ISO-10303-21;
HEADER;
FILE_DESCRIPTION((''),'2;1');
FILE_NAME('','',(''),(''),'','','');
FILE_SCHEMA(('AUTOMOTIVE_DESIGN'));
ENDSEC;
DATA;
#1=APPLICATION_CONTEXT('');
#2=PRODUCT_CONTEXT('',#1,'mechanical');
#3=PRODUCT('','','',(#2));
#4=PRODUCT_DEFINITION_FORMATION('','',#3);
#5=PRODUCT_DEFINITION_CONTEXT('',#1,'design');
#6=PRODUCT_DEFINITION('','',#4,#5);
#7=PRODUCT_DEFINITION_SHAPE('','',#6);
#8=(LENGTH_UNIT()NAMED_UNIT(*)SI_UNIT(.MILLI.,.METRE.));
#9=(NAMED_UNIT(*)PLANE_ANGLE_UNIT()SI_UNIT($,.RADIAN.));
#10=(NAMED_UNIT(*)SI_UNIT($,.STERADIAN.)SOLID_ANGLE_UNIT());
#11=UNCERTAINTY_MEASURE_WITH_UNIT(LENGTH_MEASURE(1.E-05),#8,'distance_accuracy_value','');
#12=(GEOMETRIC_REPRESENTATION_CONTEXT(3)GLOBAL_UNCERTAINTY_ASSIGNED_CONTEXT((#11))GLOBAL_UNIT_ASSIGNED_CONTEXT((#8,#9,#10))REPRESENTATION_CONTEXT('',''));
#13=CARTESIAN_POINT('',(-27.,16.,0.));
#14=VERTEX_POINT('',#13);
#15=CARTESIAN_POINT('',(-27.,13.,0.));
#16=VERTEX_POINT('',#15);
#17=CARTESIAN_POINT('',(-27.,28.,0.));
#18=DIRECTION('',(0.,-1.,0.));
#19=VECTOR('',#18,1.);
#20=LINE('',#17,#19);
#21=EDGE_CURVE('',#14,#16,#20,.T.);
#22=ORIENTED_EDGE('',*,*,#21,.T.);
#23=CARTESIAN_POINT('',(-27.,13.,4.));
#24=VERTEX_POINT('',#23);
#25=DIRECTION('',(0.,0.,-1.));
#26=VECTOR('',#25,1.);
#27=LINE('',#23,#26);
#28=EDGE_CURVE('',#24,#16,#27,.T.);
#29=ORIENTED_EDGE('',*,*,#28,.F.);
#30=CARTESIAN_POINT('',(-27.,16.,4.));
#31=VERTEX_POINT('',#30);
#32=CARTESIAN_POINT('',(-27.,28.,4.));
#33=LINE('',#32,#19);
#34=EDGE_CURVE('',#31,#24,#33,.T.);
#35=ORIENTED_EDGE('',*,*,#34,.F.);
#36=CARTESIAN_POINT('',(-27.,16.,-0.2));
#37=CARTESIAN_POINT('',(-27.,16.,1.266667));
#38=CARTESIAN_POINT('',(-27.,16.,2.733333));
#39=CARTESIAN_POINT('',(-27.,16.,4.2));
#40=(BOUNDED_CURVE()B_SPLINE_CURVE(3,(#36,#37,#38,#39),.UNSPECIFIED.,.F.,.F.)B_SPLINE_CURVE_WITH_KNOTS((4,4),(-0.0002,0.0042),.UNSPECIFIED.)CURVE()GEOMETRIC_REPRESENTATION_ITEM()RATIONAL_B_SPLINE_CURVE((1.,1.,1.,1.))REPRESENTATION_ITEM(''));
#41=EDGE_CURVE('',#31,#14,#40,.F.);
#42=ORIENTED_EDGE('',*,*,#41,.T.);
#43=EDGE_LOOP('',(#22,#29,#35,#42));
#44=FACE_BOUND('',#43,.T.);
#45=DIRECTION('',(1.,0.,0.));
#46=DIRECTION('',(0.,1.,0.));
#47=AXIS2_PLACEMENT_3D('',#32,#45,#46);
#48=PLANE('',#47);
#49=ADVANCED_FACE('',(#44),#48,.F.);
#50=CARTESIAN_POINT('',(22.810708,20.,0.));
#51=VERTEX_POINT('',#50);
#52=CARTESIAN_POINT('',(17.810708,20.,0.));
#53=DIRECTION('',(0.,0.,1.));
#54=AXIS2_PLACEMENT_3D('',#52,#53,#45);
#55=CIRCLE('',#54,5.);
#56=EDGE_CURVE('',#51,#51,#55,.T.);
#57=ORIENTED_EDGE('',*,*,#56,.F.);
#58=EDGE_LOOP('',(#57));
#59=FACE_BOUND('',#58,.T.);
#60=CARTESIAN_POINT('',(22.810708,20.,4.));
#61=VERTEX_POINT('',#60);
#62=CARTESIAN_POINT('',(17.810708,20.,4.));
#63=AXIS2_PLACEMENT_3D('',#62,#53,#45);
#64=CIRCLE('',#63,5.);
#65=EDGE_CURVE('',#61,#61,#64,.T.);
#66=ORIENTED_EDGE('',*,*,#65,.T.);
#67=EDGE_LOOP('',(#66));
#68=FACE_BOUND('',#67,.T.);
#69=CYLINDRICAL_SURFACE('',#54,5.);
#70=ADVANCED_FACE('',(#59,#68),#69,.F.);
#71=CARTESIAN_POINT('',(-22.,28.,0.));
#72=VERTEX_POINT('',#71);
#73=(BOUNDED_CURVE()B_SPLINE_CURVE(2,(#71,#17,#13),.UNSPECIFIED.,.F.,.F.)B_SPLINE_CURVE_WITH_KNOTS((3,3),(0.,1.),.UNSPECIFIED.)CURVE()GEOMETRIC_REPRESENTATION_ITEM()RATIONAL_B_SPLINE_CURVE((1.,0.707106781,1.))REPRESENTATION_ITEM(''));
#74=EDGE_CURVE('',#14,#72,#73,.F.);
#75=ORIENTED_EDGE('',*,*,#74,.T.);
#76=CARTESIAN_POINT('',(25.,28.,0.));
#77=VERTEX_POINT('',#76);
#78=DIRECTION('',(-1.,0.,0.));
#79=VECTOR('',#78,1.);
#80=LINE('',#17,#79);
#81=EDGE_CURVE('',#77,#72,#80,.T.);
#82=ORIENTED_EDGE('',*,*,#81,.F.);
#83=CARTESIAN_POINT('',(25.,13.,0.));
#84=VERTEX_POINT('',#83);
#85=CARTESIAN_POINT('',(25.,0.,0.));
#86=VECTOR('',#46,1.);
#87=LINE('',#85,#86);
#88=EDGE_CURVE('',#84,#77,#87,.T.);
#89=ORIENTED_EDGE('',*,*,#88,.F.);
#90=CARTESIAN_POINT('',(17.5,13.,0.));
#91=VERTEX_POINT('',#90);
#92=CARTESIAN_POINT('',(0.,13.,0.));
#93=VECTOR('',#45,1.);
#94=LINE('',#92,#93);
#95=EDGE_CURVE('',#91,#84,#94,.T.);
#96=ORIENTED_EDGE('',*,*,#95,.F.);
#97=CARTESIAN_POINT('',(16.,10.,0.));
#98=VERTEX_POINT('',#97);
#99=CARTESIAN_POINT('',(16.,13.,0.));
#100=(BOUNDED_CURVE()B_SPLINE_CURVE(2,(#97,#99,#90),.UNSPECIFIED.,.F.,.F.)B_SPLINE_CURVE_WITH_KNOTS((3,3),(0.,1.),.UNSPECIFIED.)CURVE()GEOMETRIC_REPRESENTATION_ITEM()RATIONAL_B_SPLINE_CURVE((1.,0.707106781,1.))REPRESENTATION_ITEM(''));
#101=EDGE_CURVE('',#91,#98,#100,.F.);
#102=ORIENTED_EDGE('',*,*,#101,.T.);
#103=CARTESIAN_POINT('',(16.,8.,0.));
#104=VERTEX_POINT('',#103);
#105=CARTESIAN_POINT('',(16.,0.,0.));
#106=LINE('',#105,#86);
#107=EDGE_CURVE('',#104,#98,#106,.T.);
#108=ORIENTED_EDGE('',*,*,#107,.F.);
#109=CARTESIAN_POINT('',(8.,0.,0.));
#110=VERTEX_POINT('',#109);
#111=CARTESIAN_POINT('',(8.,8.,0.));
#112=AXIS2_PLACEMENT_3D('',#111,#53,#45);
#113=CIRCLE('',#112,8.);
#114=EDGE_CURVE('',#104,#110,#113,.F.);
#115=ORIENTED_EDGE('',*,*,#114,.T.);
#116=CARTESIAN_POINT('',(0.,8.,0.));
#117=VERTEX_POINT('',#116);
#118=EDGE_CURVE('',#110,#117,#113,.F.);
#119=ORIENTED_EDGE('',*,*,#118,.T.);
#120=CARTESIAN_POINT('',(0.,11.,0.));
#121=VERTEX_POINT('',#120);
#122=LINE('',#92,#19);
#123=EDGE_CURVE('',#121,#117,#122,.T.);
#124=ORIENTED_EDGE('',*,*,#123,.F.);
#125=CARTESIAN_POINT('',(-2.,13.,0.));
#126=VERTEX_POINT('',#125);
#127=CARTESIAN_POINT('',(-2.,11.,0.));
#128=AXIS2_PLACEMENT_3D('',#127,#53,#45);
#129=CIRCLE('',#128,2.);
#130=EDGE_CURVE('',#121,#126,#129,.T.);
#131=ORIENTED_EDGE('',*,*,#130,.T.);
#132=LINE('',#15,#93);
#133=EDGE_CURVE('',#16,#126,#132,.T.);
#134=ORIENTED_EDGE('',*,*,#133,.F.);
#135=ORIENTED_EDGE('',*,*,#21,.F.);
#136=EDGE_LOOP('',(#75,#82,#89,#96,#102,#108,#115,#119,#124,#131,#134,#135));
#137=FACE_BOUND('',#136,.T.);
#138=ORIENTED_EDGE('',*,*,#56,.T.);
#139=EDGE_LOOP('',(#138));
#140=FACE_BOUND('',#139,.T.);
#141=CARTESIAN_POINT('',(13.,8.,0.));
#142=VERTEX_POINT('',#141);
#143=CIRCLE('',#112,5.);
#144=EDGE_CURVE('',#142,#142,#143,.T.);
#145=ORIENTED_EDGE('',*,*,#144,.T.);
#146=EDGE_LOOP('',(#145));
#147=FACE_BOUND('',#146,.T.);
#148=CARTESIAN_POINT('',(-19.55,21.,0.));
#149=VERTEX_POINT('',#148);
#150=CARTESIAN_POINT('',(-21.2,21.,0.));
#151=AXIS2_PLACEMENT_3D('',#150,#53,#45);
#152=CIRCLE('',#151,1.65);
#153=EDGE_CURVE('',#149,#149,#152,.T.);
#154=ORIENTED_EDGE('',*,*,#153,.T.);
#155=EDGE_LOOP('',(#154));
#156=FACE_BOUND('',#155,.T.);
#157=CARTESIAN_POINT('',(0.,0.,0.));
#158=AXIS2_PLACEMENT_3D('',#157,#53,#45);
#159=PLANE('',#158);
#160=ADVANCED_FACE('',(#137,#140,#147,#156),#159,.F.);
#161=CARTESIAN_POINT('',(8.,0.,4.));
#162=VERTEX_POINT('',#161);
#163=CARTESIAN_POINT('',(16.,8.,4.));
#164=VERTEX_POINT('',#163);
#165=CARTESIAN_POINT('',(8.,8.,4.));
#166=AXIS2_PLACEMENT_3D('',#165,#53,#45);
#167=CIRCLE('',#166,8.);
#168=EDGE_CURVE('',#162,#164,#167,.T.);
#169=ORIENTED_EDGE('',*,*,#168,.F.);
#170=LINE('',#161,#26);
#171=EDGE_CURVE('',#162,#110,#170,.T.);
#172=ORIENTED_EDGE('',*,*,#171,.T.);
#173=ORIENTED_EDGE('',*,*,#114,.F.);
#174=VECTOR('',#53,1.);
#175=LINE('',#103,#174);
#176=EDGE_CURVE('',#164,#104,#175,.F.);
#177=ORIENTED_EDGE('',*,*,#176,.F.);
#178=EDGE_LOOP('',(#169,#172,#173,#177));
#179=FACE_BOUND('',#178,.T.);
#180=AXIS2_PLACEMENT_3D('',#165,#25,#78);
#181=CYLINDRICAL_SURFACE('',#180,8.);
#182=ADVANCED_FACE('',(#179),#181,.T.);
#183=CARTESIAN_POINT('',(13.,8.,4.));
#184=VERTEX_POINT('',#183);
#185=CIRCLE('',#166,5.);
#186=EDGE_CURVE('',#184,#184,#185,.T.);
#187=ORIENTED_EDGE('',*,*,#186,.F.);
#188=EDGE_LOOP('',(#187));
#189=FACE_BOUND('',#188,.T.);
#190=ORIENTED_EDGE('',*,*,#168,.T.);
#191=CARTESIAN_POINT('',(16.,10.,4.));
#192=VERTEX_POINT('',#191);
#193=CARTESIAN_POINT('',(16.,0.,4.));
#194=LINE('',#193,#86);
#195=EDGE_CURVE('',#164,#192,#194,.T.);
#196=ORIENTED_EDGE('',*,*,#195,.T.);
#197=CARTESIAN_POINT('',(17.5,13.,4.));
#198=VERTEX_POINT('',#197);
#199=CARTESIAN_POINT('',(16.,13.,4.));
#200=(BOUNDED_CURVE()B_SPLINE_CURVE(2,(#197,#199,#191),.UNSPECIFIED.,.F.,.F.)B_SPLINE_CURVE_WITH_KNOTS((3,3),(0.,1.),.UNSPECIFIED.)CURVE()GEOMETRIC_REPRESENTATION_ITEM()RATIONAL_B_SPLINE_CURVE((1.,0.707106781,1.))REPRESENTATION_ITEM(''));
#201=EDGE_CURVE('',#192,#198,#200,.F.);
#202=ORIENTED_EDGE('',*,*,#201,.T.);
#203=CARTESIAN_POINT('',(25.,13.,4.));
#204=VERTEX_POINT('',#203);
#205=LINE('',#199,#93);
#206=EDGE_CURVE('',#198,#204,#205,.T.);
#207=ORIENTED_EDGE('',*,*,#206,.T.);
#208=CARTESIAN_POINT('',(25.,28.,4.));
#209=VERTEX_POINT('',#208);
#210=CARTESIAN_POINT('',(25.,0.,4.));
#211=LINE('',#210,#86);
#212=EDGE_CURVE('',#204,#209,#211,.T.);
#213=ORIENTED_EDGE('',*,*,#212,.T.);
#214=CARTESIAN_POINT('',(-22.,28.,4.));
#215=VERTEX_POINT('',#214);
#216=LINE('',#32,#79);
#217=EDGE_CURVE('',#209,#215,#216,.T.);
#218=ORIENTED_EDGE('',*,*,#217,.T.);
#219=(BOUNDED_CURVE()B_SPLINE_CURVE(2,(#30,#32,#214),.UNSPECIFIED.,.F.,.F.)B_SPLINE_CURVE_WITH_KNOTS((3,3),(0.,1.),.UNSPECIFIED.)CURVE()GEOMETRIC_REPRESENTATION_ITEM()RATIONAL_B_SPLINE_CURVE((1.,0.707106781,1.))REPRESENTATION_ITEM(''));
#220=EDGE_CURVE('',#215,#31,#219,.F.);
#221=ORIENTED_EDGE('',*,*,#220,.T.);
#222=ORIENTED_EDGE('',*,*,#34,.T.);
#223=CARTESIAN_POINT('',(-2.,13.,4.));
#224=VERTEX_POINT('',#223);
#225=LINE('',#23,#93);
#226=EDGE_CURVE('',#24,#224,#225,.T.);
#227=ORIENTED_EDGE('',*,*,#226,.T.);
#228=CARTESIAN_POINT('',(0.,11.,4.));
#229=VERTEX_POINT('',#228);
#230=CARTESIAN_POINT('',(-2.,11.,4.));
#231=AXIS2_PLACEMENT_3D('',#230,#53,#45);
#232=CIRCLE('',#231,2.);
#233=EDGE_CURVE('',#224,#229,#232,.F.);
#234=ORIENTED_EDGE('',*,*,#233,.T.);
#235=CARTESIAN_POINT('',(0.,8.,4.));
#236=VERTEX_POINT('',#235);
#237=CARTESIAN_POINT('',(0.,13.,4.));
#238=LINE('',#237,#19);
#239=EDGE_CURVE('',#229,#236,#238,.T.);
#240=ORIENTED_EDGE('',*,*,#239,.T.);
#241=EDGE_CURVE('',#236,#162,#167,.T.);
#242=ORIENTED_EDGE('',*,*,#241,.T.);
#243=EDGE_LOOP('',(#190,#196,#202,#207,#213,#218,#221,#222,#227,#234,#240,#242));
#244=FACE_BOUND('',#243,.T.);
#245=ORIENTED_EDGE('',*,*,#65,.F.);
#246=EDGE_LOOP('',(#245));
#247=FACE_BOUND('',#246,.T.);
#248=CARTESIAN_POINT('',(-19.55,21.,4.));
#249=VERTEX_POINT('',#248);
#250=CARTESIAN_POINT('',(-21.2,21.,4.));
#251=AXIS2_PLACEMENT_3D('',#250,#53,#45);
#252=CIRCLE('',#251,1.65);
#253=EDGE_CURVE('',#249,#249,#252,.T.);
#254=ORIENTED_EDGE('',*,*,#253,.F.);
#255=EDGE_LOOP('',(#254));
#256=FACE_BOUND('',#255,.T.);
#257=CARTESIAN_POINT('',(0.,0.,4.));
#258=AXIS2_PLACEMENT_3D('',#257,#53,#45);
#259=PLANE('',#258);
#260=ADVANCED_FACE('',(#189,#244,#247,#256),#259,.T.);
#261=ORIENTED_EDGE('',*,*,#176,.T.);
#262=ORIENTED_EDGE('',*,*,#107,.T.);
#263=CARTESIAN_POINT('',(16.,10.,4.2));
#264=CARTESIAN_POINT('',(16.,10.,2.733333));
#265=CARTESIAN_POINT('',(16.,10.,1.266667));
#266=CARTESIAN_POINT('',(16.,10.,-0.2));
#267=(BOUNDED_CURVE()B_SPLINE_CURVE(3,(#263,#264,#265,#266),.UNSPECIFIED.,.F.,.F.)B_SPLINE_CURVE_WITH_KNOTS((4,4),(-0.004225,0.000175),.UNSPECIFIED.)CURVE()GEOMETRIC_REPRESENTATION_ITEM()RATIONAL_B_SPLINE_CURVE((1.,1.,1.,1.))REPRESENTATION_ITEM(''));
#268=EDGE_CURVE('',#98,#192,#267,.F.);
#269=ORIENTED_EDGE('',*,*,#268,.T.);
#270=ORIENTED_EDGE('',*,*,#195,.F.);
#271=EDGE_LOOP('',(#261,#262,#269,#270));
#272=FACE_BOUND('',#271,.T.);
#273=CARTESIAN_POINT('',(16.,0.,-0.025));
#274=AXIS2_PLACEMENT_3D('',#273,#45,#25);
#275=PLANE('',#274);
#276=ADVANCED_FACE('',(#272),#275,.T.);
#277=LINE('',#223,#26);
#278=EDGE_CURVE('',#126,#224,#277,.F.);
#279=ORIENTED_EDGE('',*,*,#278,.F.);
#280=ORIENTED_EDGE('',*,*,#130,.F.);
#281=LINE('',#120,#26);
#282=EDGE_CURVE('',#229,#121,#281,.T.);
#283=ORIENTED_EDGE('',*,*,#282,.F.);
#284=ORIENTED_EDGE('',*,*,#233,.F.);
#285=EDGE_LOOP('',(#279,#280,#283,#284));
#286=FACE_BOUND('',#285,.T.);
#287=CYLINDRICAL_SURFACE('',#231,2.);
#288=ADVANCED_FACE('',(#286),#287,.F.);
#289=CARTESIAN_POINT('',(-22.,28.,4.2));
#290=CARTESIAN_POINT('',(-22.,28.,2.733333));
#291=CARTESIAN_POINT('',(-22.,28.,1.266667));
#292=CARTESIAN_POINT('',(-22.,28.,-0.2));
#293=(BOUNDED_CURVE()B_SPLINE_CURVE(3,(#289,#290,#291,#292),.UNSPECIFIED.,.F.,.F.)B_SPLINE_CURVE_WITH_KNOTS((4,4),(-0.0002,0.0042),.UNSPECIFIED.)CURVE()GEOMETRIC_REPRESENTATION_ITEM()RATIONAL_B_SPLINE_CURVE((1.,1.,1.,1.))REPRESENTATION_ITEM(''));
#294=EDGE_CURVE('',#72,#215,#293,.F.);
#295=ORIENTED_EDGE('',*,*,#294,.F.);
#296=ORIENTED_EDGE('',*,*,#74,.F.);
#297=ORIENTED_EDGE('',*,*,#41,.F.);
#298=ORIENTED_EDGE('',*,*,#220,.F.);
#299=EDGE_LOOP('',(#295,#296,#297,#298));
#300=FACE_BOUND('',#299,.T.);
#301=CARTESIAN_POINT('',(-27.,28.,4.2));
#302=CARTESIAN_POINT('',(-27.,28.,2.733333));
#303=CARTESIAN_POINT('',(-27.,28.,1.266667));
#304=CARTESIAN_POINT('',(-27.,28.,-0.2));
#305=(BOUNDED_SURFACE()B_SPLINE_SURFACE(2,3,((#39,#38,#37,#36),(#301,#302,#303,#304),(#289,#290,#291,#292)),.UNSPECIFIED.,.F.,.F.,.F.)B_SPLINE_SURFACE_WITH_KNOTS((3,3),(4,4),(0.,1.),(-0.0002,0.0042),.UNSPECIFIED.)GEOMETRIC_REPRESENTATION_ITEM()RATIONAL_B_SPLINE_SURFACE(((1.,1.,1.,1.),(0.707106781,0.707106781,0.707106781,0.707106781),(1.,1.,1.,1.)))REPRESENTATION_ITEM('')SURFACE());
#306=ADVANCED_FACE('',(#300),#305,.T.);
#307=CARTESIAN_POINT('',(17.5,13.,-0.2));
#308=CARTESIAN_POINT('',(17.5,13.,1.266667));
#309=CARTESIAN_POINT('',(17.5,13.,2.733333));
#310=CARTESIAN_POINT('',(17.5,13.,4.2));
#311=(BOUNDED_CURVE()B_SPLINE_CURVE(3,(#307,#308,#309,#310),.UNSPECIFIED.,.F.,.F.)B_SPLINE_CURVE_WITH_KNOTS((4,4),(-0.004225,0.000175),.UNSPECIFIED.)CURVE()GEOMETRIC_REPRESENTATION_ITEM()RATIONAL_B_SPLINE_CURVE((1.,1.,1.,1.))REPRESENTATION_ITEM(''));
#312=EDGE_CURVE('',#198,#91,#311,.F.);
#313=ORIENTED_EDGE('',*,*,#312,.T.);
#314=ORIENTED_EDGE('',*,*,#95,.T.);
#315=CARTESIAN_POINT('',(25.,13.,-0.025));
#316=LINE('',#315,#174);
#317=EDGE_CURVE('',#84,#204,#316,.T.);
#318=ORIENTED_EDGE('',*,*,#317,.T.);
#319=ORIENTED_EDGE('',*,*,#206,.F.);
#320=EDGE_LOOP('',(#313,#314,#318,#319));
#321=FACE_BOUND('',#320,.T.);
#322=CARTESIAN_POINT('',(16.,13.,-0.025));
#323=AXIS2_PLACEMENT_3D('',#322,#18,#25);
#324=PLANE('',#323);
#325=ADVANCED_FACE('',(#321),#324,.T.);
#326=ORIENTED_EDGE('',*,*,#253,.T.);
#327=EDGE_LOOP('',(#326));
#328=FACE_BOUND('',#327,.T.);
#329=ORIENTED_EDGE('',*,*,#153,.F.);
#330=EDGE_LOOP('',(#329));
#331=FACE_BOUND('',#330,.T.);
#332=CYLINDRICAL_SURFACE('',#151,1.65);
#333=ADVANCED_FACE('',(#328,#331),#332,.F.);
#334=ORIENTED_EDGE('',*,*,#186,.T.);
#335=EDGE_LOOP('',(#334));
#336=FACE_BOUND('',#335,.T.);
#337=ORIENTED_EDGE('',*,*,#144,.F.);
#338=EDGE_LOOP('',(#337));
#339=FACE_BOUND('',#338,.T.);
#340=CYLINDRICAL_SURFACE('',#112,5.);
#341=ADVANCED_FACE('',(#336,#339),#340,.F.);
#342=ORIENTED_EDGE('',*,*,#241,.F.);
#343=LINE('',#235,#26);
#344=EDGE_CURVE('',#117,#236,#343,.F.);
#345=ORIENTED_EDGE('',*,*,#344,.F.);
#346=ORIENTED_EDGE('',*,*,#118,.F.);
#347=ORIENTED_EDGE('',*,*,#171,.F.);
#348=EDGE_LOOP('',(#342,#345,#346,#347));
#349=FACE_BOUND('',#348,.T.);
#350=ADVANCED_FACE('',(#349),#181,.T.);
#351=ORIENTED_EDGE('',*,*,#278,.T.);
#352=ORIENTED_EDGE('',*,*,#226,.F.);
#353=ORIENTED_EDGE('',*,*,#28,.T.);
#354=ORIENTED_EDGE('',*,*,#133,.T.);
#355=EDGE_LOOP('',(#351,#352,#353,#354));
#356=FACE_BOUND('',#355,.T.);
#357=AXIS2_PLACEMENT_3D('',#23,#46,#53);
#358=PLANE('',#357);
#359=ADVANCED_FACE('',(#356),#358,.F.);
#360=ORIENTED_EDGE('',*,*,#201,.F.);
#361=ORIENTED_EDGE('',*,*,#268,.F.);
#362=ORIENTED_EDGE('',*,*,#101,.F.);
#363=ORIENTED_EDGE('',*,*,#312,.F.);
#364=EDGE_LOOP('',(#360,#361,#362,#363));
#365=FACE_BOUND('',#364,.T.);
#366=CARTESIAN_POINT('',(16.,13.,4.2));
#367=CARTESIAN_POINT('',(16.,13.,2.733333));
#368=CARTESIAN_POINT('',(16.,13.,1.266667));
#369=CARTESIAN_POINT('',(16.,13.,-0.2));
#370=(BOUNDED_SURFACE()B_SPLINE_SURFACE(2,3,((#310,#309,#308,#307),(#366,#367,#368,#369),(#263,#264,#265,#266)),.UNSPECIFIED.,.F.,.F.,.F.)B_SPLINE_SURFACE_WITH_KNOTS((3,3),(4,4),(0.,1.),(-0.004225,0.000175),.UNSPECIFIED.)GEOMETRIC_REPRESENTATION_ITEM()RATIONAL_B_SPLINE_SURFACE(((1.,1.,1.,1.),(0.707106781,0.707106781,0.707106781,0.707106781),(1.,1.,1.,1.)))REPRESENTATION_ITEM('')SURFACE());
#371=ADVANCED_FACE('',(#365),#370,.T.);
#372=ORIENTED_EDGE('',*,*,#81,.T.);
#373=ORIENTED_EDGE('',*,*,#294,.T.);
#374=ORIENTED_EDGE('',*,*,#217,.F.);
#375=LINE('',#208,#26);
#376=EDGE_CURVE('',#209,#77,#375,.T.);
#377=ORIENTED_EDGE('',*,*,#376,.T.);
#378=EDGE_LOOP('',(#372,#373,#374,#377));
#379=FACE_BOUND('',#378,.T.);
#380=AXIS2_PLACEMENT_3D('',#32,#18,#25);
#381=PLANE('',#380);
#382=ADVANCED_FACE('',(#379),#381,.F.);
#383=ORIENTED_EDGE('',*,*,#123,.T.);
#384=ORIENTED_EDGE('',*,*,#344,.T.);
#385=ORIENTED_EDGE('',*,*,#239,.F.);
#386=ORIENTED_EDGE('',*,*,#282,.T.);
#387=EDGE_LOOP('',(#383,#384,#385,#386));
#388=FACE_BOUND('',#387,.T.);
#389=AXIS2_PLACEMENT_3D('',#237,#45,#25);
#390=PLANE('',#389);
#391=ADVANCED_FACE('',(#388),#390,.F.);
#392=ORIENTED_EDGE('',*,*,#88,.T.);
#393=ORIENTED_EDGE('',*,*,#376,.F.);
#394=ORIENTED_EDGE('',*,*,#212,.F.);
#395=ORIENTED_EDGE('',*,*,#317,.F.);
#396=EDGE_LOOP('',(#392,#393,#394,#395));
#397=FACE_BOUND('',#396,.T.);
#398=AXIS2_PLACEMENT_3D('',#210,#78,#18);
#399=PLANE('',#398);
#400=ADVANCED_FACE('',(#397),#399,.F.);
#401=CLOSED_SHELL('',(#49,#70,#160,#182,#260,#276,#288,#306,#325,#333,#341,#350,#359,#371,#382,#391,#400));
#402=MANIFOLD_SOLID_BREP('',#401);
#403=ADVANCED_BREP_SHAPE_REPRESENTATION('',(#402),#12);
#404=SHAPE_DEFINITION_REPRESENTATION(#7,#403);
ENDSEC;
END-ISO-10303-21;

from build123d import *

# Parameters (mm, degrees)
RESSALTO_EXTRUS_O1_DEPTH = 4
FILETE3_R                = 8
ESBO_O2_R                = 1.65
ESBO_O2_R_2              = 5
CORTE_EXTRUS_O1_DEPTH    = 40.102429592
FILETE12_SIZE            = 5
FILETE12_SIZE_2          = 12
FILETE14_R               = 2
ESBO_O3_W                = 9
ESBO_O3_H                = 13
CORTE_EXTRUS_O2_DEPTH    = 40.102429743
FILETE15_R               = 8
FILETE16_SIZE            = 3
FILETE16_SIZE_2          = 1.5


# Some blends are built 0.0001 mm under size
with BuildPart() as part:
    # Esboço1 → Ressalto-extrusão1 (new body)
    with BuildSketch(Plane.XY):
        Polygon((0, 0), (25, 0), (25, 28), (-27, 28), (-27, 13), (0, 13), align=None)
    extrude(amount=RESSALTO_EXTRUS_O1_DEPTH)

    # Filete3
    filete3_edges = [part.edges().sort_by_distance(p)[0] for p in [
        (0, 0, 2),
    ]]
    fillet(filete3_edges, radius=FILETE3_R)

    # Esboço2 → Corte-extrusão1 (cut, through all)
    with BuildSketch(Plane.XY.offset(4)):
        with Locations((-21.2, 21)):
            Circle(ESBO_O2_R)
        with Locations((8, 8)):
            Circle(ESBO_O2_R_2)
        with Locations((17.810708435, 20)):
            Circle(ESBO_O2_R_2)
    extrude(amount=-CORTE_EXTRUS_O1_DEPTH, mode=Mode.SUBTRACT)

    # Filete12
    # an asymmetric fillet: 12, 5 mm, written as the material it takes off along each edge
    with BuildSketch(Plane(origin=(-27, 28, -30), x_dir=(1, 0, 0), z_dir=(0, 0, 1))) as filete12_piece_1:
        with BuildLine():
            Bezier((FILETE12_SIZE, 0), (0, 0), (0, -FILETE12_SIZE_2), weights=[1, 0.707106781, 1])
            Line((0, -FILETE12_SIZE_2), (0, 0))
            Line((0, 0), (FILETE12_SIZE, 0))
        make_face()
    extrude(amount=64, mode=Mode.SUBTRACT)

    # Filete14
    filete14_edges = [part.edges().sort_by_distance(p)[0] for p in [
        (0, 13, 2),
    ]]
    fillet(filete14_edges, radius=FILETE14_R)

    # Esboço3 → Corte-extrusão2 (cut, through all)
    with BuildSketch(Plane.XY.offset(4)):
        with Locations((20.5, 6.5)):
            Rectangle(ESBO_O3_W, ESBO_O3_H)
    extrude(amount=-CORTE_EXTRUS_O2_DEPTH, mode=Mode.SUBTRACT)

    # Filete15
    filete15_edges = [part.edges().sort_by_distance(p)[0] for p in [
        (16, 0, 2),
    ]]
    fillet(filete15_edges, radius=FILETE15_R - 0.0001)  # a hair under: the kernel refuses the full size

    # Filete16
    # an asymmetric fillet: 3, 1.5 mm, written as the material it adds along each edge
    with BuildSketch(Plane(origin=(16, 13, 4), x_dir=(0, -1, 0), z_dir=(0, 0, -1))) as filete16_piece_1:
        with BuildLine():
            Bezier((FILETE16_SIZE, 0), (0, 0), (0, -FILETE16_SIZE_2), weights=[1, 0.707106781, 1])
            Line((0, -FILETE16_SIZE_2), (0, 0))
            Line((0, 0), (FILETE16_SIZE, 0))
        make_face()
    extrude(amount=4)


solid = part.part
